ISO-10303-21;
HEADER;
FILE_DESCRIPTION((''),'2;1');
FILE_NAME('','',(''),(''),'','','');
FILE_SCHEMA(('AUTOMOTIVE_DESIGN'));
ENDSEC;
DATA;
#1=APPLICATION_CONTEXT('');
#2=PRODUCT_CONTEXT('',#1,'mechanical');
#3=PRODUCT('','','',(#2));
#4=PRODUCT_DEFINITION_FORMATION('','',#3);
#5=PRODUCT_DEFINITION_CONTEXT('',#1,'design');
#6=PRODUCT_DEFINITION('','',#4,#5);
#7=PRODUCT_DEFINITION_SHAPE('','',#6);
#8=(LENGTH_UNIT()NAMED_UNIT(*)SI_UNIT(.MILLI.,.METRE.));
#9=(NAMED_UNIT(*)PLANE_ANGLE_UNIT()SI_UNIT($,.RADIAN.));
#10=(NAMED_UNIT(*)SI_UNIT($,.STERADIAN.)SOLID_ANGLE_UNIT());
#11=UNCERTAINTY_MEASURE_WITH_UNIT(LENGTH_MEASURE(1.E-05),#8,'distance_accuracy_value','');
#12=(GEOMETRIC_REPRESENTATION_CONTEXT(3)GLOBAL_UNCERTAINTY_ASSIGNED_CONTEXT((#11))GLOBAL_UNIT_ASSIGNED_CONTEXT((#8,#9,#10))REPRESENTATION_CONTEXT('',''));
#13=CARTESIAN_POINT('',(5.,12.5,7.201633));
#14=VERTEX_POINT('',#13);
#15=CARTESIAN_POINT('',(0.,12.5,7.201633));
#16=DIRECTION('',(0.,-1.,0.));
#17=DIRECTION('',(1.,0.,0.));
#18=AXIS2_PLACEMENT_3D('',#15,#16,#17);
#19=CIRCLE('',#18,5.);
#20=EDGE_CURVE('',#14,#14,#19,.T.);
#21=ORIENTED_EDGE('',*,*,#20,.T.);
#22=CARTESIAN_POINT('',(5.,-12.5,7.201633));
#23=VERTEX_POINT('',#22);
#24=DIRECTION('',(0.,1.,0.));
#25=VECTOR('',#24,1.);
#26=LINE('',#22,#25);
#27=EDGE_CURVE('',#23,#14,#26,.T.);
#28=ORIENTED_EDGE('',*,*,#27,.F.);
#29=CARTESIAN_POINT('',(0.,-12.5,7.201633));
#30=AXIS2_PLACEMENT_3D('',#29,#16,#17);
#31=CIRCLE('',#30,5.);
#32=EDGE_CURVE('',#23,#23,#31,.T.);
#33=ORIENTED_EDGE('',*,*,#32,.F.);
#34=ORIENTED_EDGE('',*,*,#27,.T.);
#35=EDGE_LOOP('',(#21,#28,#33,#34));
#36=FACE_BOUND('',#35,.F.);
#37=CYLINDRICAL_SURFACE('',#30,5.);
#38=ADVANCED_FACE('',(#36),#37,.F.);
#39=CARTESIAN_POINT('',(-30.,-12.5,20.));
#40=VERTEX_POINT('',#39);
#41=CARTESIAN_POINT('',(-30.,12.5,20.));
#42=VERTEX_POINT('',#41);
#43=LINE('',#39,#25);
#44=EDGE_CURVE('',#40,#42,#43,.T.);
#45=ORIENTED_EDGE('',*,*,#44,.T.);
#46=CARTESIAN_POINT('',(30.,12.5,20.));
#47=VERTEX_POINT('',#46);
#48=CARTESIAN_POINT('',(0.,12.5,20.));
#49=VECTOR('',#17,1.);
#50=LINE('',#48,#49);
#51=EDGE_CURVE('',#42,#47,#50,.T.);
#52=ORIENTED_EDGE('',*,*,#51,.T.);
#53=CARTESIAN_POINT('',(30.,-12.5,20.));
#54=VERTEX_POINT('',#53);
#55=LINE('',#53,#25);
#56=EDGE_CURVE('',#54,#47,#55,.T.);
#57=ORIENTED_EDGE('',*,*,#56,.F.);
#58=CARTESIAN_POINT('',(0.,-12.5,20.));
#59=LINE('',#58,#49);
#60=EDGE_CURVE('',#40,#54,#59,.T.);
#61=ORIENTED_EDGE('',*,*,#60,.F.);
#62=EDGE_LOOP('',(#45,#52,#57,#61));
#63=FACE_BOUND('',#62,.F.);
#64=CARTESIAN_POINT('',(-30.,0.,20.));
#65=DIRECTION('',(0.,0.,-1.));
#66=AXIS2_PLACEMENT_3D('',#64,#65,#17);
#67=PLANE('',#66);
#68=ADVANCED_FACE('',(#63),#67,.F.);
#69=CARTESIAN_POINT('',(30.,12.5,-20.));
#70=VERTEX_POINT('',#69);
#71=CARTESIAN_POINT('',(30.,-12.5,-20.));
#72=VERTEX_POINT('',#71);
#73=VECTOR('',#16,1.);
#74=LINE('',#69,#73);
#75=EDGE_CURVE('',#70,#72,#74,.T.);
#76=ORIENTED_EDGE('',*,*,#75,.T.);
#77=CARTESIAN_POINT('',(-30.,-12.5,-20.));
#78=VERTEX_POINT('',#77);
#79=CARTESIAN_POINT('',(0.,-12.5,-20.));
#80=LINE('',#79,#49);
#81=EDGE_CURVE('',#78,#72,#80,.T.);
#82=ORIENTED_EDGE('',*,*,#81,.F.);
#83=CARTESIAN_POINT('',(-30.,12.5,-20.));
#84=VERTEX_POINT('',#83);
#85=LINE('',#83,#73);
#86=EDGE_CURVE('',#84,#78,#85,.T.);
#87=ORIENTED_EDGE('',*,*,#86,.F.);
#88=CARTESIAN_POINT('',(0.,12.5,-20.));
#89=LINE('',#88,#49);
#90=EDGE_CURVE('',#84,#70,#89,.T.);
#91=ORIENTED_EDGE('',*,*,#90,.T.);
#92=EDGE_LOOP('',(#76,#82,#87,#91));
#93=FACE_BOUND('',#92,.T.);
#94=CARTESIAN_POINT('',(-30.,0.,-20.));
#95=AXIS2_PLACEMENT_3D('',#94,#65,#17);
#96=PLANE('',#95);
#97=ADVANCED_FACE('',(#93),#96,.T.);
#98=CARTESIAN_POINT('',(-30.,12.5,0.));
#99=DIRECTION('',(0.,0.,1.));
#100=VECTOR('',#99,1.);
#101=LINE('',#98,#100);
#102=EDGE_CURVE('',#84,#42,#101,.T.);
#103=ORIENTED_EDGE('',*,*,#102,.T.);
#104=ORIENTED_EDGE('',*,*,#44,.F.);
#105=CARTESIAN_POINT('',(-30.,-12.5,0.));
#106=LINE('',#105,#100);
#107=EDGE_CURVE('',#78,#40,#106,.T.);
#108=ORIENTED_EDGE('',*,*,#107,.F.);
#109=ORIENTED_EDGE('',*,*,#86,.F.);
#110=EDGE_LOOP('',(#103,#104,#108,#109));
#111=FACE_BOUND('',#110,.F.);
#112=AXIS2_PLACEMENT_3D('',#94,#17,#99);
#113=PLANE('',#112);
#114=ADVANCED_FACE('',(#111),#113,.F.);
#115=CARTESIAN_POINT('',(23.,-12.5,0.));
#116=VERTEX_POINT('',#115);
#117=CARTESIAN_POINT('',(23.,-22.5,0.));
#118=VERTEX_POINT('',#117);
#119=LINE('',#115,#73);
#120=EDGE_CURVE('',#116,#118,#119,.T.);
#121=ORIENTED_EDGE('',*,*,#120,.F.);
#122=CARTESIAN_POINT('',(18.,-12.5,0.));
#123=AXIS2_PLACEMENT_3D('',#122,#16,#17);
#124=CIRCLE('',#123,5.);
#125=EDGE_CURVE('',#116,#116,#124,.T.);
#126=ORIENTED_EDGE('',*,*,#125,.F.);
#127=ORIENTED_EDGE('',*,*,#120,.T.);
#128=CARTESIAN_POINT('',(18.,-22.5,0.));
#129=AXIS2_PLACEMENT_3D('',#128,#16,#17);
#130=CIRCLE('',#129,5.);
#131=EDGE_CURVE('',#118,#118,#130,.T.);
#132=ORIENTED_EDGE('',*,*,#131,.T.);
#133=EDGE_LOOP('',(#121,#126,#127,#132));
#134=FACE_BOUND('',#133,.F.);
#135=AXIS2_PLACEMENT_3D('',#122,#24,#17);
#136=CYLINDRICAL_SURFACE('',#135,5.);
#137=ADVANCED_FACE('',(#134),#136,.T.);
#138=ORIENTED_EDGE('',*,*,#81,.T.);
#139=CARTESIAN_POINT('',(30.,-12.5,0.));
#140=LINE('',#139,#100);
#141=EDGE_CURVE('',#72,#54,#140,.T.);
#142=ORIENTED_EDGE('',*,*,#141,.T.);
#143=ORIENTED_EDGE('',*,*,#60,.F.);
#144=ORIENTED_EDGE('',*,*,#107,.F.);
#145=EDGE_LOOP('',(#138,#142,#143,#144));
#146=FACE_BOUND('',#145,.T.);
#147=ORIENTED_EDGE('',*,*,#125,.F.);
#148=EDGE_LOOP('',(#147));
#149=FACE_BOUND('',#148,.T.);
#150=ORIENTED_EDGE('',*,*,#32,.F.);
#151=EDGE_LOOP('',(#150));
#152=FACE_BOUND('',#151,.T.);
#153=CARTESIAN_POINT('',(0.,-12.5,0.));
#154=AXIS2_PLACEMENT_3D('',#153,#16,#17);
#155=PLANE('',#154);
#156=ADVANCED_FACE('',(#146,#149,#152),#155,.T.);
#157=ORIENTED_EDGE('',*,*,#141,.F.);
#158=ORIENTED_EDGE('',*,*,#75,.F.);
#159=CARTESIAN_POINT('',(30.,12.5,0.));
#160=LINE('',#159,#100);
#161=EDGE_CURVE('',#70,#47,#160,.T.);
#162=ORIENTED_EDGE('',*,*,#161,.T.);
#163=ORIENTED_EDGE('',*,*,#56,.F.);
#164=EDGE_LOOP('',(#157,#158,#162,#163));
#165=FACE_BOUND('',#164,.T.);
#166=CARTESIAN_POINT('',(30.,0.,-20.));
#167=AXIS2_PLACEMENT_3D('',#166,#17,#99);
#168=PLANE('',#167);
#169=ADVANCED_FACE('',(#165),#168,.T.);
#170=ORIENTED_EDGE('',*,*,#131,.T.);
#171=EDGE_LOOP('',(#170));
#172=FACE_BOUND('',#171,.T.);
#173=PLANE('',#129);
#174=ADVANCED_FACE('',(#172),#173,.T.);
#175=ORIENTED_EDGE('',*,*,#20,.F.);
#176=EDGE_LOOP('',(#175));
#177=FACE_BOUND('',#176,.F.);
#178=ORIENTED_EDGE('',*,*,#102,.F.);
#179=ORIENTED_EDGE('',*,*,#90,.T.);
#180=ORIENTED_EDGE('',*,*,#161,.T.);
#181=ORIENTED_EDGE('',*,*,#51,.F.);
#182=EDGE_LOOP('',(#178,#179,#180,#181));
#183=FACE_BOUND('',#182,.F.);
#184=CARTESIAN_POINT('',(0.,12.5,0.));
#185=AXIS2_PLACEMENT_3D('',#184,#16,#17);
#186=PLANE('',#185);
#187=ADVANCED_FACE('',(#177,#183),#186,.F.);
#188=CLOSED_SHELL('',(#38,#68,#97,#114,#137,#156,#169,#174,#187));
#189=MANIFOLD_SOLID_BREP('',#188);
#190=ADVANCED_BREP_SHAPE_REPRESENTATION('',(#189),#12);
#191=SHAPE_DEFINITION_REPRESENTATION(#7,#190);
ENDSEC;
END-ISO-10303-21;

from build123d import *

# Parameters (mm, degrees)
F0_W     = 60
F0_H     = 40
F1_DEPTH = 12.5
F2_R     = 5
F3_DEPTH = 10
F4_R     = 5
F5_DEPTH = 25


# Not quite as in the source:
# - a feature names something its author has since deleted; it is built from what else it names


with BuildPart() as f1:
    # F0 (on Front) → F1 (new body, symmetric)
    with BuildSketch(Plane.XZ):
        Rectangle(F0_W, F0_H)
    extrude(amount=F1_DEPTH, both=True)

    # F2 (on face) → F3 (join)
    with BuildSketch(Plane.XZ.offset(12.5)):
        with Locations((18, 0)):
            Circle(F2_R)
    extrude(amount=F3_DEPTH)

    # F4 (on face) → F5 (cut)
    with BuildSketch(Plane.XZ.offset(12.5)):
        with Locations((0, 7.2016329505)):
            Circle(F4_R)
    extrude(amount=-F5_DEPTH, mode=Mode.SUBTRACT)


solid = f1.part
